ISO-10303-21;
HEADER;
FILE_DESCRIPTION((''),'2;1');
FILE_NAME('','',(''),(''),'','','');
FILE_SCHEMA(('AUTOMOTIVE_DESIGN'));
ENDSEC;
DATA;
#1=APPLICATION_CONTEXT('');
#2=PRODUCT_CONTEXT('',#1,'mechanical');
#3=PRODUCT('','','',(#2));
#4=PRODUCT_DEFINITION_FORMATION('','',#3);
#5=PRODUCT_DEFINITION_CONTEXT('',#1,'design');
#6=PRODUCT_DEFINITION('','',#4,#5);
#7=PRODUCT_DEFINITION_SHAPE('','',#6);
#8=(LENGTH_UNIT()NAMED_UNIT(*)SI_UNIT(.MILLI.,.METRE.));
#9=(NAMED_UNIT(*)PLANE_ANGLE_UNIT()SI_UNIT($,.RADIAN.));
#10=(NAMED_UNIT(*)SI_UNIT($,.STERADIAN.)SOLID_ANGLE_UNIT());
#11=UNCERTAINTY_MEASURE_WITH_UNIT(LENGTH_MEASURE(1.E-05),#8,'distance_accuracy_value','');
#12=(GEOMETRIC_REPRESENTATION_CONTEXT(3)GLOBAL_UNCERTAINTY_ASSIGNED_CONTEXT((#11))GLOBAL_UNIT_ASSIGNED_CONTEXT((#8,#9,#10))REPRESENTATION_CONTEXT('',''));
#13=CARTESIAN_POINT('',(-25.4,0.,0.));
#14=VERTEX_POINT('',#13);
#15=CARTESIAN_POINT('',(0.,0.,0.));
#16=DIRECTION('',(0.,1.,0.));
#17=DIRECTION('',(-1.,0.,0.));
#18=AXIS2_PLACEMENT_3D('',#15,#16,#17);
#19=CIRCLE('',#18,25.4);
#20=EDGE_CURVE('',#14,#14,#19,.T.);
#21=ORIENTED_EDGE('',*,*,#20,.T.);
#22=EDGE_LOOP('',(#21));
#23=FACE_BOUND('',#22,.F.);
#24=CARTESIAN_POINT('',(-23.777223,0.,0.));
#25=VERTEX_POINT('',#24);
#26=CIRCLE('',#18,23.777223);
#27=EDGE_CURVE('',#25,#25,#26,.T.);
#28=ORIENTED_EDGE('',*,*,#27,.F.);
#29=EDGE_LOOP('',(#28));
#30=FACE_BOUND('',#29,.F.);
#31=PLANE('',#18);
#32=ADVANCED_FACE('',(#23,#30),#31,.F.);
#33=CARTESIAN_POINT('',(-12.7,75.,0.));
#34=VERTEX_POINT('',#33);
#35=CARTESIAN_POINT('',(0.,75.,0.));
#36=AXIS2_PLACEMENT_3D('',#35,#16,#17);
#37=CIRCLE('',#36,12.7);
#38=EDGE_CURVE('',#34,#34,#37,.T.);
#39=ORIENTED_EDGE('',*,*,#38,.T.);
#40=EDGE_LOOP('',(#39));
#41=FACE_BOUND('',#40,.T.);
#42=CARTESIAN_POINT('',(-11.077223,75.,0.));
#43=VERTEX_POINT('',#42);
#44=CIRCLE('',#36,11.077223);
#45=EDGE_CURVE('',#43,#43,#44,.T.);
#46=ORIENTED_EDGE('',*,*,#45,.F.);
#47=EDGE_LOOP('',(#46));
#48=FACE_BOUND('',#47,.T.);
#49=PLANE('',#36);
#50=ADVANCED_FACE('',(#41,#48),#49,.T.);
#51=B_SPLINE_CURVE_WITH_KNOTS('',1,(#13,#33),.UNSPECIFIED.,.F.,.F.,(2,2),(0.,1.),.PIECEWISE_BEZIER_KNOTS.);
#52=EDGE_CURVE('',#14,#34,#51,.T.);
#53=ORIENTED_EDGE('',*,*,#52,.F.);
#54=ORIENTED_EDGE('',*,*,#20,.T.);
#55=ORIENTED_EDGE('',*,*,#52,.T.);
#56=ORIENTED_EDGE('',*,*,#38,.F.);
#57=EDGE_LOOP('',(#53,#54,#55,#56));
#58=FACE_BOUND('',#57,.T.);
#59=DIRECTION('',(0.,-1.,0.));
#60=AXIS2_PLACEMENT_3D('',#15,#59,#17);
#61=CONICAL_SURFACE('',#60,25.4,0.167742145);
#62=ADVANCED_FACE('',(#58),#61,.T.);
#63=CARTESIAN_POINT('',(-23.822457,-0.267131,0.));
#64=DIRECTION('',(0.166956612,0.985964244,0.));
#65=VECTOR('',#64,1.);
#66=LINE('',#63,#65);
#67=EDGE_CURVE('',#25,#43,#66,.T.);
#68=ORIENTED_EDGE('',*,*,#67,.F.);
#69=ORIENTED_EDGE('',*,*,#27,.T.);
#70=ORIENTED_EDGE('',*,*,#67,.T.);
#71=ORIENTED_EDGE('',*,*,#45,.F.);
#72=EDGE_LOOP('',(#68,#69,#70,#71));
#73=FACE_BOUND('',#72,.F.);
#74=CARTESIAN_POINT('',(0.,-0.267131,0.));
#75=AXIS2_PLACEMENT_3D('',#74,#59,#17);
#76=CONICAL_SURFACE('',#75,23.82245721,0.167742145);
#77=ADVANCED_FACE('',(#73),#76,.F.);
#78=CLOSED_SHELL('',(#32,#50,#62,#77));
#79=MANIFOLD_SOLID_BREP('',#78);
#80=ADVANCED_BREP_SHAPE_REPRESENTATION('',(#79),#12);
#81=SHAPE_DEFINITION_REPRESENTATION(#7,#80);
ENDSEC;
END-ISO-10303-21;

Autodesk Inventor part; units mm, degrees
ref_plane "YZ Plane" through (0, 0, 0) normal (1, 0, 0) x (0, 1, 0)
ref_plane "XY Plane" through (0, 0, 0) normal (0, 0, 1) x (1, 0, 0)
sketch "Szkic6" plane through (0, 0, 0) normal (0, 1, 0) x (-1, 0, 0)
  circle A0 centre (0, 0) radius 25.4
  dimension "d33" = 50.8
ref_plane "Płaszczyzna konstrukcyjna1" through (0, 75, 0) normal (0, 1, 0) x (-1, 0, 0)
sketch "Szkic7" plane through (0, 75, 0) normal (0, 1, 0) x (-1, 0, 0)
  circle A0 centre (0, 0) radius 12.7
  dimension "d35" = 25.4
loft "Wyciągnięcie złożone1" add profiles "Szkic6", "Szkic7"
shell "Skorupa1" thickness 1.6 removed faces 2 at (3.6254, 75, -0.9542) at (7.2508, 0, -1.9085)
equation "\"d33\" = OD1"
equation "\"d35\" = OD2"
equation "\"d52\" = THK"
equation "\"SzerokośćGięciaPodcięcia\" = Grubość"
equation "\"RozmiarPodcięciaNarożnika\" = 4 * Grubość"
equation "\"PromieńPrzejścia\" = PromieńGięcia"
equation "\"Rozmiar_promienia_Jacobiego\" = PromieńGięcia"
equation "\"Wielk_odstępu\" = Grubość"
equation "\"d2\" = PromieńGięcia"
equation "\"d23\" = PromieńGięcia"
equation "\"OD1\" = 50.8"
equation "\"OD2\" = 25.4"
equation "\"L\" = 75"
equation "\"THK\" = 1.6"
equation "\"d34\" = L"
equation "\"Grubość\" = 1.5"
equation "\"PromieńGięcia\" = 3"
properties part number "Redukcja symetryczna Ø50,8x25,4x1,6 L=75" material "304"
